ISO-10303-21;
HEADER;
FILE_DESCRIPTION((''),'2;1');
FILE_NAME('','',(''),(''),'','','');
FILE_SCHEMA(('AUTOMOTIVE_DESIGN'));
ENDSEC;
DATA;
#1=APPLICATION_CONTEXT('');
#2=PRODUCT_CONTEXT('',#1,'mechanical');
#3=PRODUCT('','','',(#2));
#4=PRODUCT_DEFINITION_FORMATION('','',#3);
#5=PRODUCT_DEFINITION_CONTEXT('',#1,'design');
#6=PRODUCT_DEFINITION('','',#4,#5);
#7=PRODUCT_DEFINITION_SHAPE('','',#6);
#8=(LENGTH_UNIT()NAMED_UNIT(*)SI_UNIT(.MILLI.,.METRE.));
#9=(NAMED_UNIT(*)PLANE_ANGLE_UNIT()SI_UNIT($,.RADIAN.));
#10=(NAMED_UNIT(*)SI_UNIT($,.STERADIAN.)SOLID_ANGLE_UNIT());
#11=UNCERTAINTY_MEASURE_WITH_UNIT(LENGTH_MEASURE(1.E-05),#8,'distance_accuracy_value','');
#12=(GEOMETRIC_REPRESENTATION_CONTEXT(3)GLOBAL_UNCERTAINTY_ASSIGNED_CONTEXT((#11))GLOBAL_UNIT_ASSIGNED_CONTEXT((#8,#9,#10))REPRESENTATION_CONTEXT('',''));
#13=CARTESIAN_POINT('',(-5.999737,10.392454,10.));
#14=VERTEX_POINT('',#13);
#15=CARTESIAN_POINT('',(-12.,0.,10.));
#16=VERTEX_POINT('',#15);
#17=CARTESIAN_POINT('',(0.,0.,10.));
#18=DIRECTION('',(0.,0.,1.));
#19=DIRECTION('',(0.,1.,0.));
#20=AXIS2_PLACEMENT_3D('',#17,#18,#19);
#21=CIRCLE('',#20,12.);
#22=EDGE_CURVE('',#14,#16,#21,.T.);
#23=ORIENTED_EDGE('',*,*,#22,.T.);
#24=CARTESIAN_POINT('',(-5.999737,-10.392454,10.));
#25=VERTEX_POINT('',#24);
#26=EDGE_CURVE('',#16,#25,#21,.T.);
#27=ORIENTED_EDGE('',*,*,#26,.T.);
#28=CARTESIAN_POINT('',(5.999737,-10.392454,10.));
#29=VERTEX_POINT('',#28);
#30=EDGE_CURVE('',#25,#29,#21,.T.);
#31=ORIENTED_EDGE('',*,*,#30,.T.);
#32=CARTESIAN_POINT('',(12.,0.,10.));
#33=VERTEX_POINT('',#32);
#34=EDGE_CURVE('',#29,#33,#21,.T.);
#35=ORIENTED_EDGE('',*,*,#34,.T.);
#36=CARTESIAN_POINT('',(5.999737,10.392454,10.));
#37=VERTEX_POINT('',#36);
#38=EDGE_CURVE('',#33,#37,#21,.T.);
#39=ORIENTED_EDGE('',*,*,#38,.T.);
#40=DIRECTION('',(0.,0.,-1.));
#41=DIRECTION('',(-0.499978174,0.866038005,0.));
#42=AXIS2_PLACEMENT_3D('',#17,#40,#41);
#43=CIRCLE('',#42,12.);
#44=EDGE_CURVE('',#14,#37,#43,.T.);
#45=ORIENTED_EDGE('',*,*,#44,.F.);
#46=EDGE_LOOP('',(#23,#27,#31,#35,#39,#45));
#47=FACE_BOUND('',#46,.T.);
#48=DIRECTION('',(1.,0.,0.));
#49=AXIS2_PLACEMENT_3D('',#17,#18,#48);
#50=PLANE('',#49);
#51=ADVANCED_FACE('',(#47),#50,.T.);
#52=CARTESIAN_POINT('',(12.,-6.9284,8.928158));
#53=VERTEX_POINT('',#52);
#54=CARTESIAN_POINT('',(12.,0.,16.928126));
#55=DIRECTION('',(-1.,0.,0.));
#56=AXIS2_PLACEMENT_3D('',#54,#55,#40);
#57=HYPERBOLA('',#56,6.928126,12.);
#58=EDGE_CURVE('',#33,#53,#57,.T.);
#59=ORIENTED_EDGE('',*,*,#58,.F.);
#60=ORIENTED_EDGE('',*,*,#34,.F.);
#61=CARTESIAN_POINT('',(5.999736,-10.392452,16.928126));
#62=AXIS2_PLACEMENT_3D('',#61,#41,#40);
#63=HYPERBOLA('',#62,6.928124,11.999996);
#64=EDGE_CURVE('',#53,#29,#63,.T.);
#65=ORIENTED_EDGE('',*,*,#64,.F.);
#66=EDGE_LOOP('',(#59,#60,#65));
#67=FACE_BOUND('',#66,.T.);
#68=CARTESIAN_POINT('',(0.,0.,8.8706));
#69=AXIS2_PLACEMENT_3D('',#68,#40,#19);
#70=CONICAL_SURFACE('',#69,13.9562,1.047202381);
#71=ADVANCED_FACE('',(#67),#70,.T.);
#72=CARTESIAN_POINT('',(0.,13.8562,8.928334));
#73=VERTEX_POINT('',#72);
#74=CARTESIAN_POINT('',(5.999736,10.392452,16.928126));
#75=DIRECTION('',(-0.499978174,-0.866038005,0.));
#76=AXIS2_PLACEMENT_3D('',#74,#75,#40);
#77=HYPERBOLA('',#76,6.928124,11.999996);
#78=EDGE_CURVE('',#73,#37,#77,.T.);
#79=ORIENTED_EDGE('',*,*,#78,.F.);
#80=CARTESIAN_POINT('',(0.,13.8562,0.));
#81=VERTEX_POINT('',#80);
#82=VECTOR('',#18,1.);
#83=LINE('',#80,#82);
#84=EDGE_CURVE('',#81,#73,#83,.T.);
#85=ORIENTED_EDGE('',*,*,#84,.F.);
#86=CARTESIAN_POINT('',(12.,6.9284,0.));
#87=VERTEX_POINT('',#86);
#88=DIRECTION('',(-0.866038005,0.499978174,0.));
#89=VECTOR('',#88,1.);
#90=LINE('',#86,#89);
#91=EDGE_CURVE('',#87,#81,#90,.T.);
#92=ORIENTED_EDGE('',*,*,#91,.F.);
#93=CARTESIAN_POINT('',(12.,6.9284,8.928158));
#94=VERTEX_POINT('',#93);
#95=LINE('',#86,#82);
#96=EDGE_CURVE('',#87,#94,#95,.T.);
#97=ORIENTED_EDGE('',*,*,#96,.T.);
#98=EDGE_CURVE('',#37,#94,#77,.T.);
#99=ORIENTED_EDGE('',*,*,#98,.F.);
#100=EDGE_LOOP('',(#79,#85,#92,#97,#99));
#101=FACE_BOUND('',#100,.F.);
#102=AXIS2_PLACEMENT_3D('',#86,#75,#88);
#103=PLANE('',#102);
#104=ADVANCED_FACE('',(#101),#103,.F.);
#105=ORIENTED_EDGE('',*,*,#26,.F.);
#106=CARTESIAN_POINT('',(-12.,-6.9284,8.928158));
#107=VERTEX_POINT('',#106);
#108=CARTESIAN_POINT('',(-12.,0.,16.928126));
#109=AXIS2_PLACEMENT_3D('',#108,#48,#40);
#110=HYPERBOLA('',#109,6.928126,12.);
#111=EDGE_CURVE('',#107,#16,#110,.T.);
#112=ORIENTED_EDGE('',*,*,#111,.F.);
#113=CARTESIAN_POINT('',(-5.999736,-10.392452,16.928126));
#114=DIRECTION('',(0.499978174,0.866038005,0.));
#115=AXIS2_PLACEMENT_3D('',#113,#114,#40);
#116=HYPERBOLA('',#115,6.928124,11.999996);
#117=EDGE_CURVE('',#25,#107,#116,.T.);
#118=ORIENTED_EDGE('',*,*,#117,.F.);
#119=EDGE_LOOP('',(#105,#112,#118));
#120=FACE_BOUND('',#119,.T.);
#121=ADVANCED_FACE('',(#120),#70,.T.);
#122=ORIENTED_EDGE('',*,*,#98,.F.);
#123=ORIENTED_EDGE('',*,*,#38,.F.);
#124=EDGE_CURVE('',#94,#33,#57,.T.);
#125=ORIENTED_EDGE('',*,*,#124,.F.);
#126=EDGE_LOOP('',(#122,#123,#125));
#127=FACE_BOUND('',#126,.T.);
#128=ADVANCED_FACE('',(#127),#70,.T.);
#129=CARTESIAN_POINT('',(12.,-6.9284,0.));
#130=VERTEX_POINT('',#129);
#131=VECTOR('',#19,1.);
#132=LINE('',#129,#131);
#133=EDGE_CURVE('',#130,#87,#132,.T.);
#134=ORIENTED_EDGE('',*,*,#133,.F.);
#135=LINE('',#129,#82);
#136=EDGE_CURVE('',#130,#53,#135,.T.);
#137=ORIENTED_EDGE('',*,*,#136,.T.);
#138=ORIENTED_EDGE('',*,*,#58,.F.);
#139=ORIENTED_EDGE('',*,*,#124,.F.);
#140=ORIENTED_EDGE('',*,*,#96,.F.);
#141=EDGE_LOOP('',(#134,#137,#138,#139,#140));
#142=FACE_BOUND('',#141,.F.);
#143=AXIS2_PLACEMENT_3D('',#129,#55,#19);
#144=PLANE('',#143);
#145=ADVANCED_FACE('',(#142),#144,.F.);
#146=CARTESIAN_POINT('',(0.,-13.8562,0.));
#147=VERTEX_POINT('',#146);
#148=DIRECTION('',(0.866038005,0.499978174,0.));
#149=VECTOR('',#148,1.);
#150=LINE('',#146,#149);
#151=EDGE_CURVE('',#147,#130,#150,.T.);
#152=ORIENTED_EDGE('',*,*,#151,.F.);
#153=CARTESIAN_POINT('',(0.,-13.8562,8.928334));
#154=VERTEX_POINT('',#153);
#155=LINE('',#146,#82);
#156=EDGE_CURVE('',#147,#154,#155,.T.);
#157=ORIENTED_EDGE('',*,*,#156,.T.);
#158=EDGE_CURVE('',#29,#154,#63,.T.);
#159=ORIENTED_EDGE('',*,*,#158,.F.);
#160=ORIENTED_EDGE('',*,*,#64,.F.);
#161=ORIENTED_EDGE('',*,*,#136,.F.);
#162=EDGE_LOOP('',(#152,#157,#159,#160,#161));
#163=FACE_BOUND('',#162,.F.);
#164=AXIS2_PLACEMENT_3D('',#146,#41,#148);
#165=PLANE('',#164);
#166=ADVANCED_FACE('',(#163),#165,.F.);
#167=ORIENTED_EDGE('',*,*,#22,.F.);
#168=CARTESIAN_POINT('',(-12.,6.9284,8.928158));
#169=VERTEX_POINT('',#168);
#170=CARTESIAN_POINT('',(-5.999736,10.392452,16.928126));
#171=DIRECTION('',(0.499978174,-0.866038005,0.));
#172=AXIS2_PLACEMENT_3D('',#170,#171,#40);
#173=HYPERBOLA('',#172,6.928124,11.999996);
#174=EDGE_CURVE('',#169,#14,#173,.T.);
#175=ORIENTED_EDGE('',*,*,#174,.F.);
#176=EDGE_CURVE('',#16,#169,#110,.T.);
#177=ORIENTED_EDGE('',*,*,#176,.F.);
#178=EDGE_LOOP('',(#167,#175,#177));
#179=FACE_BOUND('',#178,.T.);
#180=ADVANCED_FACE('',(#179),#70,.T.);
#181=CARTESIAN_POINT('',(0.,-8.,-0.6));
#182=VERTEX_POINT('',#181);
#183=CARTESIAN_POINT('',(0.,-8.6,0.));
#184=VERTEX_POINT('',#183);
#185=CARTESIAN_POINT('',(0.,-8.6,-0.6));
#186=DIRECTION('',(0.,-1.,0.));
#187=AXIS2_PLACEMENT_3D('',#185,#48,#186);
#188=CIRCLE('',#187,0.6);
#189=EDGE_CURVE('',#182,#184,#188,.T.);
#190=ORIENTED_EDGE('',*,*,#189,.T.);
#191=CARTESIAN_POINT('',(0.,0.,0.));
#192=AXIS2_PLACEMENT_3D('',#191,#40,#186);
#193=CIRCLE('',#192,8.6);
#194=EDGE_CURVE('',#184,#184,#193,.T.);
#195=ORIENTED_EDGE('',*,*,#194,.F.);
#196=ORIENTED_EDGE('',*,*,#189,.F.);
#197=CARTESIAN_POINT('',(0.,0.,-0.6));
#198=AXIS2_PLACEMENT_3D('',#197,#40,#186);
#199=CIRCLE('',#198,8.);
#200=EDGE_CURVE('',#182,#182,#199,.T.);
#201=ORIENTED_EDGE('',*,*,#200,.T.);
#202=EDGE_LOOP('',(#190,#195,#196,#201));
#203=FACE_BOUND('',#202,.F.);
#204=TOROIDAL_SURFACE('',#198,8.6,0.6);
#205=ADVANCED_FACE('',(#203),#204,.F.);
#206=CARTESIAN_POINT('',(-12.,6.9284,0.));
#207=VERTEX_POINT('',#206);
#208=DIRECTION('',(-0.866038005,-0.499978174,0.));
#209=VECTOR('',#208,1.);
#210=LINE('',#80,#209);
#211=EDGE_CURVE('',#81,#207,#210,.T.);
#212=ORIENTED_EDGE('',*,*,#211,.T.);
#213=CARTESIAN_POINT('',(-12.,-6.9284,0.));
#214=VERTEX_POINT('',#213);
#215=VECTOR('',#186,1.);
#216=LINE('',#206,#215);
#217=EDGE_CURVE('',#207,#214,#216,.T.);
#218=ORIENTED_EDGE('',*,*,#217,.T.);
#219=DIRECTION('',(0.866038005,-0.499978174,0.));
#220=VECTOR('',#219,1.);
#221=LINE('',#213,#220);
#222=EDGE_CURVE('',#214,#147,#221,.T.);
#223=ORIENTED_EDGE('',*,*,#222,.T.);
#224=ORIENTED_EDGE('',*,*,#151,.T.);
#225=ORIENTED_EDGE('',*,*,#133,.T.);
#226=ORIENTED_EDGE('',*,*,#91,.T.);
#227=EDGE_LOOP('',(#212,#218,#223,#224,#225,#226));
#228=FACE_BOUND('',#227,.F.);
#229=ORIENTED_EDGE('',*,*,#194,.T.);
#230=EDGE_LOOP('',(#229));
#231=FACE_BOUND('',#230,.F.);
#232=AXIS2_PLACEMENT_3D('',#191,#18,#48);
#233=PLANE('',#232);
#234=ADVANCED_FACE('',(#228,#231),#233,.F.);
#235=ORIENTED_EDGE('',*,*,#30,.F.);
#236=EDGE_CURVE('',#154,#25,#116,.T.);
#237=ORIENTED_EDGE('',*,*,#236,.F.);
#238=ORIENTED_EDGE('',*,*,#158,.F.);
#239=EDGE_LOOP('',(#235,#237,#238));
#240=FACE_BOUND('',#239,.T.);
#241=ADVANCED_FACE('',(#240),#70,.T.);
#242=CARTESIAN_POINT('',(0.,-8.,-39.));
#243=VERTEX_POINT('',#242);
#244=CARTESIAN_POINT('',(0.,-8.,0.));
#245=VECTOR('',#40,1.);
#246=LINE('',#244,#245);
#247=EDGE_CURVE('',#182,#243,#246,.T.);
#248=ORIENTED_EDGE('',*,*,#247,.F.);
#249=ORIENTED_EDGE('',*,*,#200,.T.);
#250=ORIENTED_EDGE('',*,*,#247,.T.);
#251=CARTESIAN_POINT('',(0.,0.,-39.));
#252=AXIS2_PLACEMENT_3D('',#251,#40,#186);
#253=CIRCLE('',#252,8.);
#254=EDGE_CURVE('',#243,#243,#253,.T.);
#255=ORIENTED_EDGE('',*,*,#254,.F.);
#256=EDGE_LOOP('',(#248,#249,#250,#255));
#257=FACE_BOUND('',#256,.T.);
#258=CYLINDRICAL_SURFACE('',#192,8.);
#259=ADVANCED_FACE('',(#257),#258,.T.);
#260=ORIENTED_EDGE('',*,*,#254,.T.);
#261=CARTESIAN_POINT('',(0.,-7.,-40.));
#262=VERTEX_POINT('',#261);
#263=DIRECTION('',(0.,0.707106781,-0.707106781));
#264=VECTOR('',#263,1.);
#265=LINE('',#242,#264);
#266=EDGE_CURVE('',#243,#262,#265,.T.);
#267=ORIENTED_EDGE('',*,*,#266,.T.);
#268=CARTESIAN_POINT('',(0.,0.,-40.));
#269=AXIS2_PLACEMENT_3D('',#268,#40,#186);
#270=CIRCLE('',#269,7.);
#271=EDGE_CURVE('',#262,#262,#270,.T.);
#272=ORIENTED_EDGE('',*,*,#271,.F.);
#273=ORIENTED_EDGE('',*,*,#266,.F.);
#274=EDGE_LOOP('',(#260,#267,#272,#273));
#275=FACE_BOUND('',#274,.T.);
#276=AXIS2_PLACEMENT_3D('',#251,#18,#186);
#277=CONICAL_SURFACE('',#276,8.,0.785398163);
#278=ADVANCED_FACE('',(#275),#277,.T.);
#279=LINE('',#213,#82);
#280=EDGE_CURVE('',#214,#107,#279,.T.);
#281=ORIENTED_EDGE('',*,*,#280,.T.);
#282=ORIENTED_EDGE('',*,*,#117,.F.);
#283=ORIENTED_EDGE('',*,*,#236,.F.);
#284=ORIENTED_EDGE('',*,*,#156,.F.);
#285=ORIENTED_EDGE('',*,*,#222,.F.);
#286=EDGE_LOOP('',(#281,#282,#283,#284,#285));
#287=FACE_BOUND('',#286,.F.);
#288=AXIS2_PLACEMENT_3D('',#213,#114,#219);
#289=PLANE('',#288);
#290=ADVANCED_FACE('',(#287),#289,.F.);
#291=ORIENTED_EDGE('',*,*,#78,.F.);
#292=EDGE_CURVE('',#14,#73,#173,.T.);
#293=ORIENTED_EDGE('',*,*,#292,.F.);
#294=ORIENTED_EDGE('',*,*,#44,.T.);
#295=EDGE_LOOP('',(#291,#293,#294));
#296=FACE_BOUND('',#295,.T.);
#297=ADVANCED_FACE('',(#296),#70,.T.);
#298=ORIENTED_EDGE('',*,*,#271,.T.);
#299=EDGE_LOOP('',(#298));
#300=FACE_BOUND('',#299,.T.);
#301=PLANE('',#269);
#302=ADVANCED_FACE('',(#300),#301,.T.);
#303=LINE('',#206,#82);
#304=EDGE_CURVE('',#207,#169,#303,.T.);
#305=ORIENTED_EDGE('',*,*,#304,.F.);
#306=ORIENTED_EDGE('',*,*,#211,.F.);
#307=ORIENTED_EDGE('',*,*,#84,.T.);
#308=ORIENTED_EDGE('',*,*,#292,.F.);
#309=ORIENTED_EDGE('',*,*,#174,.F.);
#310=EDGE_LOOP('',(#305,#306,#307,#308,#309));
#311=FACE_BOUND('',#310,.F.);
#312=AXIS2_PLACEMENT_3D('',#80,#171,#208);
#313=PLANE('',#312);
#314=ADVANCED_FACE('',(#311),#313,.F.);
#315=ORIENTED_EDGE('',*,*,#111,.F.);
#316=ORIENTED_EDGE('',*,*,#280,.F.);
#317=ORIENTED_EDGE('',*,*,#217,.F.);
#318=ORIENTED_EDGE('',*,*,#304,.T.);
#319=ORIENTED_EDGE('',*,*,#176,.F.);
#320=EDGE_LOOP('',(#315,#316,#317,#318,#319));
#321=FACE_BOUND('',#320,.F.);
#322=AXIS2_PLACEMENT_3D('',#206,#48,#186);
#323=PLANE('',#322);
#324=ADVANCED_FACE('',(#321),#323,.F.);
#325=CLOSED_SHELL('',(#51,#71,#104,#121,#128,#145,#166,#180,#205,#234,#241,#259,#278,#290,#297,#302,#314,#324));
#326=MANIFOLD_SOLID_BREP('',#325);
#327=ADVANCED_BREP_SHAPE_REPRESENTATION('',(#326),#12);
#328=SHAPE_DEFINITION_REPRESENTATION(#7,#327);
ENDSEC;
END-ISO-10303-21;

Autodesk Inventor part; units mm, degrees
ref_plane "WorkPlane1" through (0, 0, 0) normal (0, 0, 1) x (1, 0, 0)
sketch "Sketch1" plane through (0, 0, 0) normal (0, 0, 1) x (1, 0, 0)
  point P0 (0, 0)
sketch "Sketch2" plane through (0, 0, 0) normal (0, 0, 1) x (1, 0, 0)
  line L0 (-12, 6.9284) -> (-12, -6.9284)
  line L1 (0, 13.8562) -> (-12, 6.9284)
  line L2 (12, 6.9284) -> (0, 13.8562)
  line L3 (12, -6.9284) -> (12, 6.9284)
  line L4 (0, -13.8562) -> (12, -6.9284)
  line L5 (-12, -6.9284) -> (0, -13.8562)
  circle A0 centre (0, 0) radius 12 construction
  dimension "d1" = 24
  dimension "d29" = 0
  dimension "d30" = 0
extrude "Extrusion1" add sketch "Sketch2" along normal blind 10
sketch "Sketch3" plane through (0, 0, 0) normal (1, 0, 0) x (0, 1, 0)
  line L0 (12, 10) -> (13.9562, 10)
  line L1 (13.9562, 8.8706) -> (12, 10)
  line L2 (13.9562, 10) -> (13.9562, 8.8706)
  line L3 (0, -2) -> (0, 12) projected
  line L4 (13.8562, 0) -> (13.8562, 10) projected
  dimension "d25" = 0.1
  dimension "d26" = 0
  dimension "d27" = 60
  dimension "d28" = 12
revolve "Revolution1" cut sketch "Sketch3" angle 360 about axis through (0, 0, -10) along (0, 0, 1)
sketch "Sketch4" plane through (0, 0, 0) normal (1, 0, 0) x (0, 1, 0)
  line L0 (0, -40) -> (0, 0)
  line L1 (-8, -40) -> (0, -40)
  line L2 (-8, 0) -> (-8, -40)
  line L3 (0, 0) -> (-8, 0)
  line L4 (0, -40) -> (0, 0)
  line L5 (-9.6, 0) -> (1.6, 0) projected
  line L6 (0, -48) -> (0, 8) projected
  dimension "d18" = 8
  dimension "d20" = 40
  dimension "d33" = 0
  dimension "d34" = 0
revolve "Revolution2" add sketch "Sketch4" angle 360 about axis through (0, 0, -40) along (0, 0, -1)
chamfer "Chamfer1" distance 1 angle 45 1 edges at (0, 8, -40)
fillet "Fillet1" radius 0.6 1 edges at (0, 8, 0)
thread "Thread1" size "M16x2" class "6g" standard "ISO Metric profile" length 36
ref_plane "MSC_PF1" through (0, 0, 0) normal (1, 0, 0) x (0, 1, 0)
ref_plane "MSC_PT1" through (0, 0, 0) normal (0, 0, -1) x (-1, 0, 0)
equation "\"d22\" = 0.5 * PTC"
equation "\"d23\" = 0.5 * PTC"
equation "\"d24\" = r"
equation "\"d1\" = ParS"
equation "\"d6\" = ParK"
equation "\"b\" = NLG - 2 * PTC"
equation "\"d28\" = 0.5 * ParS"
equation "\"d18\" = 0.5 * NND"
equation "\"d20\" = NLG"
equation "\"NND\" = 16"
equation "\"NLG\" = 40"
equation "\"PTC\" = 2"
equation "\"ParK\" = 10"
equation "\"ParS\" = 24"
equation "\"msp_es\" = 0.577367 * ParS"
equation "\"r\" = 0.6"
equation "\"THREADDIA\" = NND"
properties part number "ISO 4018 - M16 x 40" material "Steel"
